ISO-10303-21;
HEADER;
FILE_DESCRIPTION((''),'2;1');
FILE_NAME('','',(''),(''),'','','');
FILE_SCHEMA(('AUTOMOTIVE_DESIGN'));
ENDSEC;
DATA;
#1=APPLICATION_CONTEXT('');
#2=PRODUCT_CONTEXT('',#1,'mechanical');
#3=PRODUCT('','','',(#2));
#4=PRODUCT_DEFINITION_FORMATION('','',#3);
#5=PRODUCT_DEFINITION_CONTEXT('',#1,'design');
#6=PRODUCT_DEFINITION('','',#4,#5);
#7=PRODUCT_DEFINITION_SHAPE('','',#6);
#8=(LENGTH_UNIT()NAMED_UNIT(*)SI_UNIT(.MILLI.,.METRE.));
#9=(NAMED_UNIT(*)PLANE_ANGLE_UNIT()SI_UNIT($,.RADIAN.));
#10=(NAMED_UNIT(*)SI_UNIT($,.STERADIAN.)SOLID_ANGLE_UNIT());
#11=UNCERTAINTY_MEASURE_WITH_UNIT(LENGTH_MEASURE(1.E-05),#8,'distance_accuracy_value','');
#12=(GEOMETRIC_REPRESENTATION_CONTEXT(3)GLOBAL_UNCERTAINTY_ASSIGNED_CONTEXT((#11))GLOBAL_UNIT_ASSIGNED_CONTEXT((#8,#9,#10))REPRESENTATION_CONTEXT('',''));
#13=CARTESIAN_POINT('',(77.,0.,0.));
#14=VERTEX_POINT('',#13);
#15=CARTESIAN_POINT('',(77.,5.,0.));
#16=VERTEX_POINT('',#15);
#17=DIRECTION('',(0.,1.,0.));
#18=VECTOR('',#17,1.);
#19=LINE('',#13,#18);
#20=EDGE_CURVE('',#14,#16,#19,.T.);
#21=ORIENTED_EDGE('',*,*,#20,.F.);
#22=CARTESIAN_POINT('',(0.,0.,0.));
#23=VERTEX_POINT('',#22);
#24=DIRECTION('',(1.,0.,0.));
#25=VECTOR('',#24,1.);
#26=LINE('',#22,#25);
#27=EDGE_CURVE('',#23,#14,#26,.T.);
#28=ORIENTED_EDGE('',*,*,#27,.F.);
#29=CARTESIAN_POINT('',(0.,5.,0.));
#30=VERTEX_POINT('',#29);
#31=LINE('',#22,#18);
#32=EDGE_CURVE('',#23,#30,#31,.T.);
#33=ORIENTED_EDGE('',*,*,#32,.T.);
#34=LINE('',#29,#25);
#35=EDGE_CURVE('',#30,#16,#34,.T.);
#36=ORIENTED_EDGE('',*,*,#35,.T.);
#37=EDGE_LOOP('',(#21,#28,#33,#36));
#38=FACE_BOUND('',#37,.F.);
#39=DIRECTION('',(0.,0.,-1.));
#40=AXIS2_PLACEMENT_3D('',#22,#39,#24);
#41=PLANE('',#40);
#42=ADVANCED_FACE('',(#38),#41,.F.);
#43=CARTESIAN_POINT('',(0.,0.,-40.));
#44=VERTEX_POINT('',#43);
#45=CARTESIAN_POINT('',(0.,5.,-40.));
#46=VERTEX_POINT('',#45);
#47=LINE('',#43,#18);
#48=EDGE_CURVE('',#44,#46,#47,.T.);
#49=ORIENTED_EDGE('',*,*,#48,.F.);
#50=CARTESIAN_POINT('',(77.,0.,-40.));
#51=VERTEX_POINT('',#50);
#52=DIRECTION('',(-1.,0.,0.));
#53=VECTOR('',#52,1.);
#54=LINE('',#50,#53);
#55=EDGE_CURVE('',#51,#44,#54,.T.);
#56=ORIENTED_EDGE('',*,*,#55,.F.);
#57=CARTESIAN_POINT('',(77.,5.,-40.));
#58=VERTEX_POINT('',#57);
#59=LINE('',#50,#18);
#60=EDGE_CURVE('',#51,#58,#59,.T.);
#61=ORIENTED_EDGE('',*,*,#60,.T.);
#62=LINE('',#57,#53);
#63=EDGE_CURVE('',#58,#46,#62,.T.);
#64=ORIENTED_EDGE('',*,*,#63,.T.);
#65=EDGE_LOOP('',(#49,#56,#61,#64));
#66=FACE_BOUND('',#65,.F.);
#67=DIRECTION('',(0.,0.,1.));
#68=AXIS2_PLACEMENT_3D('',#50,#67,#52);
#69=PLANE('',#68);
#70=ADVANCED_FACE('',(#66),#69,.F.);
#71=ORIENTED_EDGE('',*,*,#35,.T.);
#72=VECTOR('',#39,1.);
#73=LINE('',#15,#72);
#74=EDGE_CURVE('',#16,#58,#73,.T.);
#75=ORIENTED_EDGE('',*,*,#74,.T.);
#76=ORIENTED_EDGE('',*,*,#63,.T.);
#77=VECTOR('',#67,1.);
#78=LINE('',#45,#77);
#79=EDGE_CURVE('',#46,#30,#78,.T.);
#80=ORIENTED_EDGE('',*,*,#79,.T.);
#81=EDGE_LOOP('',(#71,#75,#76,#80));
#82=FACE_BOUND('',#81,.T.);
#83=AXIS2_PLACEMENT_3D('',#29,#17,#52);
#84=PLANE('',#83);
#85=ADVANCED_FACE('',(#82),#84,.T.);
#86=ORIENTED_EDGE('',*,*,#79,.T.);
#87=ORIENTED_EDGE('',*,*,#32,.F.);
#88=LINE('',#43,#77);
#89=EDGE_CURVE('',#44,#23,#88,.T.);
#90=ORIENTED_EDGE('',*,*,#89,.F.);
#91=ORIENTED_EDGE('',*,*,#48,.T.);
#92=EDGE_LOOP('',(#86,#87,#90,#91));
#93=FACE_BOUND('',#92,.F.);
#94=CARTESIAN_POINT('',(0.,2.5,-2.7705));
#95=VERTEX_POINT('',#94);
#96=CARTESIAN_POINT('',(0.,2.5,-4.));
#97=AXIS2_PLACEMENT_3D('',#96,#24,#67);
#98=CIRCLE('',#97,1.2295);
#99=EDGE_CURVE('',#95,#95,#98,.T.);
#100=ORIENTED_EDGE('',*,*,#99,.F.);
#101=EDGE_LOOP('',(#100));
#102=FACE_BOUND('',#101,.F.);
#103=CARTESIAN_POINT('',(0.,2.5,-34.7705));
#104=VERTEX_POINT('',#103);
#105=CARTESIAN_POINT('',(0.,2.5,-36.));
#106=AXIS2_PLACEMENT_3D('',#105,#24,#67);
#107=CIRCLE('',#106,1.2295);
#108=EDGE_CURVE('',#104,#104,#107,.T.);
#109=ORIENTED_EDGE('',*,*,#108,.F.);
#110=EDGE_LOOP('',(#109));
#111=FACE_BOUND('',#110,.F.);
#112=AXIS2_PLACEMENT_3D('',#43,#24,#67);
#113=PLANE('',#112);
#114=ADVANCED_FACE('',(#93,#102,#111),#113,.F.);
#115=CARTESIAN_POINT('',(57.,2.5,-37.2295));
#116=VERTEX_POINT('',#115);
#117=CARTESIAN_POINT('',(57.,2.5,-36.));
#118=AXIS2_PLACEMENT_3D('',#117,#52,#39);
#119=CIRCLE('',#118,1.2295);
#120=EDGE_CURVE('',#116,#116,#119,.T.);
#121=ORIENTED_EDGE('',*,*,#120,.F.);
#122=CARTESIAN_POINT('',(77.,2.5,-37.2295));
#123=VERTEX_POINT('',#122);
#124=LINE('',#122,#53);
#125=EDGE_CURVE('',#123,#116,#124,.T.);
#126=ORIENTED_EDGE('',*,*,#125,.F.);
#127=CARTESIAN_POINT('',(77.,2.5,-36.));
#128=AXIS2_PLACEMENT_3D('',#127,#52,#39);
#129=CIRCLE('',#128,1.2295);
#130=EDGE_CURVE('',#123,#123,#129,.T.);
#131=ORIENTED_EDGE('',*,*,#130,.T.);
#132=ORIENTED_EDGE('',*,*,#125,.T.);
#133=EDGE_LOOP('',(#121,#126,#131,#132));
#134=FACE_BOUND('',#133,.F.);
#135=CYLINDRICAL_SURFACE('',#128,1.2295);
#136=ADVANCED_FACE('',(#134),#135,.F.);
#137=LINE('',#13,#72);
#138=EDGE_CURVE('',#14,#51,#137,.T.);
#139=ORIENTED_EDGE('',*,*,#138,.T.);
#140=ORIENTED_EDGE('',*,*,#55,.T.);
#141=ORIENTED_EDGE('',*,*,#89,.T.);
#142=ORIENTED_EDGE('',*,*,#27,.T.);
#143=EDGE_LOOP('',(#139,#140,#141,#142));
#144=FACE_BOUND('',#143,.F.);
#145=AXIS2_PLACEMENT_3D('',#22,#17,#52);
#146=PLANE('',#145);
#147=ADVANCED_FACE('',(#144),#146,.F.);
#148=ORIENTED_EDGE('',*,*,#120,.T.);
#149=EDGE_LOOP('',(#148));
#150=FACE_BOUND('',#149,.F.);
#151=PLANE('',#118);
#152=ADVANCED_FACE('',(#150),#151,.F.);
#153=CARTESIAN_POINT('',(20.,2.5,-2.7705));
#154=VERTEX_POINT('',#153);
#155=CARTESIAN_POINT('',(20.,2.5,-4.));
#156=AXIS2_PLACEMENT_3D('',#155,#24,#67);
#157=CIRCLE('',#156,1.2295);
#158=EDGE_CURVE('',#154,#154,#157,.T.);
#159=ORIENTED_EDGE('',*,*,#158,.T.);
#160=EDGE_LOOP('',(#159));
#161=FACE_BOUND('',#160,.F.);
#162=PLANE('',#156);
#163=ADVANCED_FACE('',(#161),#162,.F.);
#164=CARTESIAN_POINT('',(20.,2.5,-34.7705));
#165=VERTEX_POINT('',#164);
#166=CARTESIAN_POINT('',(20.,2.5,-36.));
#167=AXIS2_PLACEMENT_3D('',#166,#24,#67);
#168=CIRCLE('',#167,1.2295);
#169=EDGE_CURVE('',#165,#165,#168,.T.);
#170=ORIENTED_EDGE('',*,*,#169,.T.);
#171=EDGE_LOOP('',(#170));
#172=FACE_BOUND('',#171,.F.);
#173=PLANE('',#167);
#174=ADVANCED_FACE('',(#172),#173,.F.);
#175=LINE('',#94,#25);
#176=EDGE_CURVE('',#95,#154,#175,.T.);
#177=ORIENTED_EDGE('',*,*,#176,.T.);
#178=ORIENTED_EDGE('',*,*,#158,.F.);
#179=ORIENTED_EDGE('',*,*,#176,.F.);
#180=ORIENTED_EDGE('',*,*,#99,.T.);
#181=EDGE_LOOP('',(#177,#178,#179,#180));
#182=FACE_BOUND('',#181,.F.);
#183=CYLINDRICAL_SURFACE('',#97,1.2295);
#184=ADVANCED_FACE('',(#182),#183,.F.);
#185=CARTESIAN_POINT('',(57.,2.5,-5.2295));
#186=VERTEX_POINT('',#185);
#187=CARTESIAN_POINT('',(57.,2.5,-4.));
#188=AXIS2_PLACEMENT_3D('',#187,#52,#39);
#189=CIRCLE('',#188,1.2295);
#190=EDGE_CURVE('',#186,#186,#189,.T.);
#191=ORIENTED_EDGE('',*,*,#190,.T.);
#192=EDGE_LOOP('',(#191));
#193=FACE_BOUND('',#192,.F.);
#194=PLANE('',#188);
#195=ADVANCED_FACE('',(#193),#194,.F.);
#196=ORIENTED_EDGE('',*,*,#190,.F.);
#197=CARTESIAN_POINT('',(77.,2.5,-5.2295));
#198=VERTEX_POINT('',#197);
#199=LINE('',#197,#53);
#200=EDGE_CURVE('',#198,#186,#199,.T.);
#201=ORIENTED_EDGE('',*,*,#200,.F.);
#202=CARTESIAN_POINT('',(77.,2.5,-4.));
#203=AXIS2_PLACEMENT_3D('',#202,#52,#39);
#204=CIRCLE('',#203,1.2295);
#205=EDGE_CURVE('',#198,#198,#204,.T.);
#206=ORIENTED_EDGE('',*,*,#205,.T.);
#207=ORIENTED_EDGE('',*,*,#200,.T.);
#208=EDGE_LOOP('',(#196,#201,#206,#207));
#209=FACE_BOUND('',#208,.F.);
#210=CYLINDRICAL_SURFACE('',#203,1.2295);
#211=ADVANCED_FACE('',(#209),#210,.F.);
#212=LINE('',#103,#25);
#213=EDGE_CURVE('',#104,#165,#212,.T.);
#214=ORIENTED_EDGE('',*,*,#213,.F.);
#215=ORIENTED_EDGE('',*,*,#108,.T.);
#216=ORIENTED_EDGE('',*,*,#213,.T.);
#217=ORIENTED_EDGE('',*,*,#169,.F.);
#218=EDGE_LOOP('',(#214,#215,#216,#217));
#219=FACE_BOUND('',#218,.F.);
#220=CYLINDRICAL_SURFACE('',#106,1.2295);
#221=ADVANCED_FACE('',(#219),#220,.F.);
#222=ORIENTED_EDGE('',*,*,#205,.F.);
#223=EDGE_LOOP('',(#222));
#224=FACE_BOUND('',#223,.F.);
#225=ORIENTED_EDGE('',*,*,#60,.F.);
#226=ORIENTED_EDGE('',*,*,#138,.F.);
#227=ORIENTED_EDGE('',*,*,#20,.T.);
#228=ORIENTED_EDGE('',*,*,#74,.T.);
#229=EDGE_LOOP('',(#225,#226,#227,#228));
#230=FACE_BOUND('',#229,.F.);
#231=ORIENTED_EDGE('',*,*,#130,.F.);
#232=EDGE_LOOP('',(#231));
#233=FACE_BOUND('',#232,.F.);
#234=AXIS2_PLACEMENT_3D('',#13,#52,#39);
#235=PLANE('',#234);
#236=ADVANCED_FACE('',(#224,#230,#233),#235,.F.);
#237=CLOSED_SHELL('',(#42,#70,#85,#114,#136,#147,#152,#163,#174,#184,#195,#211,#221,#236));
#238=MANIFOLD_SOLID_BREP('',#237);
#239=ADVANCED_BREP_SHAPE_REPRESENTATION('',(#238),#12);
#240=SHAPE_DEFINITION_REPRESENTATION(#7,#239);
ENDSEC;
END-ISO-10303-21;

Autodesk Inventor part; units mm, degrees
ref_plane "YZ Plane" through (0, 0, 0) normal (1, 0, 0) x (0, 1, 0)
ref_plane "XZ Plane" through (0, 0, 0) normal (0, 1, 0) x (-1, 0, 0)
ref_plane "XY Plane" through (0, 0, 0) normal (0, 0, 1) x (1, 0, 0)
sketch "スケッチ2" plane through (0, 0, 0) normal (0, 1, 0) x (-1, 0, 0)
  line L0 (0, 0) -> (-77, 0)
  line L1 (-77, 0) -> (-77, -40)
  line L2 (-77, -40) -> (0, -40)
  line L3 (0, -40) -> (0, 0)
  dimension "d0" = 77
  dimension "d1" = 40
extrude "押し出し1" add sketch "スケッチ2" along normal blind 5
sketch "スケッチ4" plane through (0, 0, -40) normal (-1, 0, 0) x (0, 0, 1)
  line L0 (0, 0) -> (0, 5) construction
  line L1 (0, 2.5) -> (40, 2.5) construction
  line L2 (40, 0) -> (40, 5) construction
  point P0 (4, 2.5)
  point P1 (36, 2.5)
  dimension "d4" = 4
  dimension "d5" = 4
hole "穴1" at (0, 2.5, -36) at (0, 2.5, -4) direction (1, 0, 0) diameter 2.459 depth 20 thread size "M3x0.5" class "6H" standard "ISO Metric profile"
sketch "スケッチ5" plane through (77, 0, 0) normal (1, 0, 0) x (0, 0, -1)
  line L0 (0, 0) -> (0, 5) construction
  line L1 (0, 2.5) -> (39.9198, 2.5) construction
  circle A0 centre (4, 2.5) radius 1.2295 construction
  circle A1 centre (36, 2.5) radius 1.2295 projected
hole "穴2" at (77, 2.5, -4) at (77, 2.5, -36) direction (-1, 0, 0) diameter 2.459 depth 20 thread size "M3x0.5" class "6H" standard "ISO Metric profile"
properties part number "shoulder1_verticval_plate"
